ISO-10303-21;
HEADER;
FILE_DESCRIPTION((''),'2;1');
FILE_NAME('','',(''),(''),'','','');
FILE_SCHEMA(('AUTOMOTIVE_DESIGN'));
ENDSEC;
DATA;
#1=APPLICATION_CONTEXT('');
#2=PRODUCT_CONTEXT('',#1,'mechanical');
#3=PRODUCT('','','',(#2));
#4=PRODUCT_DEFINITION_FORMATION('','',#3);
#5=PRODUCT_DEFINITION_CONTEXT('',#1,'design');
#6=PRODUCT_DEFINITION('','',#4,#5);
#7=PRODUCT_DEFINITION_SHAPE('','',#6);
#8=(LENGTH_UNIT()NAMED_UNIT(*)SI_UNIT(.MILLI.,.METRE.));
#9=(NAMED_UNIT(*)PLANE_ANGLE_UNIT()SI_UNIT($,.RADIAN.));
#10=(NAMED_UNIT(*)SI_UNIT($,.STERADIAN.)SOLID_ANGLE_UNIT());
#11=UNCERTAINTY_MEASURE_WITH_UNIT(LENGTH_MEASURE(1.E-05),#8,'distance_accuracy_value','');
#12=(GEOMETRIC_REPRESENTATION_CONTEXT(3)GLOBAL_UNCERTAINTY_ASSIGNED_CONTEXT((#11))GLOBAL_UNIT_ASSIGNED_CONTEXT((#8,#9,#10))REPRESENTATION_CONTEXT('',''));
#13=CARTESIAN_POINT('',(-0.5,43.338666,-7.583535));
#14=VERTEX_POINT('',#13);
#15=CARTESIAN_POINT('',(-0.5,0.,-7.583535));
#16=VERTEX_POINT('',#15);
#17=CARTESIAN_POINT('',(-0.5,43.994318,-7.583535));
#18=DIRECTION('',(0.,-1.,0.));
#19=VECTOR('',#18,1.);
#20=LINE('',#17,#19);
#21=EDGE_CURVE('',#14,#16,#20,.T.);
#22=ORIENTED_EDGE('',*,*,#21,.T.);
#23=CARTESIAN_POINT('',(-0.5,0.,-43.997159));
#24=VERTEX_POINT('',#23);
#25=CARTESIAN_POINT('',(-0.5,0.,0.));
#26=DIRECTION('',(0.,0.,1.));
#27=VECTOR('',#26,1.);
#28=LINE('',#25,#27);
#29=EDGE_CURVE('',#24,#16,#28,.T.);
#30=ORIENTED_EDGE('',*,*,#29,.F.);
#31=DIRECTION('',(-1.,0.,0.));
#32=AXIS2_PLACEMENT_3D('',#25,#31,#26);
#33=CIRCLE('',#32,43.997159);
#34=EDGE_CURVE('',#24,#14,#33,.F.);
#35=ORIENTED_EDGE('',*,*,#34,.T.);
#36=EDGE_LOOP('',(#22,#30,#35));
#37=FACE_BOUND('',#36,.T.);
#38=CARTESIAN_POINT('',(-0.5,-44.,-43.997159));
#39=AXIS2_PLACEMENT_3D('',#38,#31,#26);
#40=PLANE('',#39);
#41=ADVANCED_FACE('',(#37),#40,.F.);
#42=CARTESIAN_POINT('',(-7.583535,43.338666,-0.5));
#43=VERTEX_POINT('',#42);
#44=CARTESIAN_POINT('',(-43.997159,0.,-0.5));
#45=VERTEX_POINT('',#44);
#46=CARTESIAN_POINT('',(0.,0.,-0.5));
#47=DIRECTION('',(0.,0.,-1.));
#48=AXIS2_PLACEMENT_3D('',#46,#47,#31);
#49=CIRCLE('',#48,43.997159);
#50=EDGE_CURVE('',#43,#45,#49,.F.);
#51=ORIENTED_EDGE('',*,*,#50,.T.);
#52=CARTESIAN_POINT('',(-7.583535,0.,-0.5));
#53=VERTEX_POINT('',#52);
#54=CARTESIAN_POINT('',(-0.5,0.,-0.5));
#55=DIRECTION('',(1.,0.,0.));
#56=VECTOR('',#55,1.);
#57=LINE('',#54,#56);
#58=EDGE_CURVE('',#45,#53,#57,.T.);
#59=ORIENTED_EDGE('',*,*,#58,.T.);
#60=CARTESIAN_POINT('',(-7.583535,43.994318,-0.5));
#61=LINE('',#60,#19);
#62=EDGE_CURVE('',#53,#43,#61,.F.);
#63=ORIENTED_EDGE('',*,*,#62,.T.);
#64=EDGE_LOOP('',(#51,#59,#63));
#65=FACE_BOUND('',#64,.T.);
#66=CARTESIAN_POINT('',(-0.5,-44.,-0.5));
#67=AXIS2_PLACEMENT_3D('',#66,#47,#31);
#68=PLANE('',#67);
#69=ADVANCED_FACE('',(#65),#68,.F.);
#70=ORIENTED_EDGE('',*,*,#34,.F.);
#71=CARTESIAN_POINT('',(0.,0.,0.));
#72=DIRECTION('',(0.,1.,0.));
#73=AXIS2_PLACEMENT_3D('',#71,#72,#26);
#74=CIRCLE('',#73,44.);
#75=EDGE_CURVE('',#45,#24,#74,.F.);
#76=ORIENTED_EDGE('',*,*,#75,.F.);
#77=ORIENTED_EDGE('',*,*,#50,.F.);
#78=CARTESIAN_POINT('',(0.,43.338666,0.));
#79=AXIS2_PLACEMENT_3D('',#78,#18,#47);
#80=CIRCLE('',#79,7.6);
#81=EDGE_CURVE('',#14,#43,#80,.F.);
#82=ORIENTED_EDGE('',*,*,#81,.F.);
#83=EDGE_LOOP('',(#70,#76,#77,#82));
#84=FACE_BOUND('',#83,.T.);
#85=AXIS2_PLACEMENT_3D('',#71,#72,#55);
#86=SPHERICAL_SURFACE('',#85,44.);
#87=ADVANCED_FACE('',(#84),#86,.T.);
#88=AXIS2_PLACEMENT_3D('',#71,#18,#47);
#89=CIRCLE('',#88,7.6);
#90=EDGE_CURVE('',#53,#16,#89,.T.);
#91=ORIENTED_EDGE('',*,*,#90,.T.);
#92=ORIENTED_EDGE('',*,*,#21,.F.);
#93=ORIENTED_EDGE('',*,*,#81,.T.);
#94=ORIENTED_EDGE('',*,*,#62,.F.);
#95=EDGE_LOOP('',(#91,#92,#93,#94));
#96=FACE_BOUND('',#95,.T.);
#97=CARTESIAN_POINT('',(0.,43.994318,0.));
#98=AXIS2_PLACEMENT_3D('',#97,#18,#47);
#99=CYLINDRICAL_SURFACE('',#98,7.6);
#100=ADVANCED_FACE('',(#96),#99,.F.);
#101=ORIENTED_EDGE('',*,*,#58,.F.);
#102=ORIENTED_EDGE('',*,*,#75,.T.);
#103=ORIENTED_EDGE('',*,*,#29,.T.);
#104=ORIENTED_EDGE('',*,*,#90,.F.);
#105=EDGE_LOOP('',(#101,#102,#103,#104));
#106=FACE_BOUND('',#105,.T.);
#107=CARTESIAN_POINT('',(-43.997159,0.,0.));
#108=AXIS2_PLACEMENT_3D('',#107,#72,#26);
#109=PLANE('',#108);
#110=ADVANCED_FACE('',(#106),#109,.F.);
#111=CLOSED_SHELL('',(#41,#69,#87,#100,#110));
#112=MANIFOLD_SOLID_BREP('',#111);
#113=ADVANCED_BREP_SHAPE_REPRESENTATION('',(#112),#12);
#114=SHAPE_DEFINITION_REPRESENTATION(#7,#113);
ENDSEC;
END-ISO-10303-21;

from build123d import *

# Parameters (mm, degrees)
CUT_EXTRUDE1_DEPTH      = 77.210235533
CUT_EXTRUDE1_DEPTH_BACK = 77.210235533
SKETCH3_W               = 43.997158999
SKETCH3_H               = 43.997158999
CUT_EXTRUDE2_DEPTH      = 76.916090791
SKETCH6_R               = 7.6
CUT_EXTRUDE3_DEPTH      = 77.203674452


with BuildPart() as part:
    # Sketch1 → Revolve1 (revolve)
    with BuildSketch(Plane.XY):
        with BuildLine():
            Line((0, 44), (0, -44))
            ThreePointArc((0, -44), (-44, 0), (0, 44))
        make_face()
    revolve(axis=Axis((0, 44, 0), (0, -1, 0)))

    # Sketch2 → Cut-Extrude1 (cut, two sides: drawn at the far end of the back side and taken through both)
    with BuildSketch(Plane(origin=(0, 0, 0), x_dir=(1, 0, 0), z_dir=(0, 1, 0)).offset(-CUT_EXTRUDE1_DEPTH_BACK)):
        with BuildLine():
            Line((-0.5, 43.997158999), (-0.5, 0.5))
            Line((-0.5, 0.5), (-43.997158999, 0.5))
            ThreePointArc((-43.997158999, 0.5), (31.112698372, -31.112698372), (-0.5, 43.997158999))
        make_face()
    extrude(amount=CUT_EXTRUDE1_DEPTH + CUT_EXTRUDE1_DEPTH_BACK, mode=Mode.SUBTRACT)

    # Sketch3 → Cut-Extrude2 (cut, through all)
    with BuildSketch(Plane(origin=(-0.5, 0, 0), x_dir=(0, 0, -1), z_dir=(1, 0, 0))):
        with Locations((21.998579499, -21.998579499)):
            Rectangle(SKETCH3_W, SKETCH3_H)
    extrude(amount=-CUT_EXTRUDE2_DEPTH, mode=Mode.SUBTRACT)

    # Sketch6 → Cut-Extrude3 (cut, through all)
    with BuildSketch(Plane.XZ):
        Circle(SKETCH6_R)
    extrude(amount=-CUT_EXTRUDE3_DEPTH, mode=Mode.SUBTRACT)


solid = part.part
